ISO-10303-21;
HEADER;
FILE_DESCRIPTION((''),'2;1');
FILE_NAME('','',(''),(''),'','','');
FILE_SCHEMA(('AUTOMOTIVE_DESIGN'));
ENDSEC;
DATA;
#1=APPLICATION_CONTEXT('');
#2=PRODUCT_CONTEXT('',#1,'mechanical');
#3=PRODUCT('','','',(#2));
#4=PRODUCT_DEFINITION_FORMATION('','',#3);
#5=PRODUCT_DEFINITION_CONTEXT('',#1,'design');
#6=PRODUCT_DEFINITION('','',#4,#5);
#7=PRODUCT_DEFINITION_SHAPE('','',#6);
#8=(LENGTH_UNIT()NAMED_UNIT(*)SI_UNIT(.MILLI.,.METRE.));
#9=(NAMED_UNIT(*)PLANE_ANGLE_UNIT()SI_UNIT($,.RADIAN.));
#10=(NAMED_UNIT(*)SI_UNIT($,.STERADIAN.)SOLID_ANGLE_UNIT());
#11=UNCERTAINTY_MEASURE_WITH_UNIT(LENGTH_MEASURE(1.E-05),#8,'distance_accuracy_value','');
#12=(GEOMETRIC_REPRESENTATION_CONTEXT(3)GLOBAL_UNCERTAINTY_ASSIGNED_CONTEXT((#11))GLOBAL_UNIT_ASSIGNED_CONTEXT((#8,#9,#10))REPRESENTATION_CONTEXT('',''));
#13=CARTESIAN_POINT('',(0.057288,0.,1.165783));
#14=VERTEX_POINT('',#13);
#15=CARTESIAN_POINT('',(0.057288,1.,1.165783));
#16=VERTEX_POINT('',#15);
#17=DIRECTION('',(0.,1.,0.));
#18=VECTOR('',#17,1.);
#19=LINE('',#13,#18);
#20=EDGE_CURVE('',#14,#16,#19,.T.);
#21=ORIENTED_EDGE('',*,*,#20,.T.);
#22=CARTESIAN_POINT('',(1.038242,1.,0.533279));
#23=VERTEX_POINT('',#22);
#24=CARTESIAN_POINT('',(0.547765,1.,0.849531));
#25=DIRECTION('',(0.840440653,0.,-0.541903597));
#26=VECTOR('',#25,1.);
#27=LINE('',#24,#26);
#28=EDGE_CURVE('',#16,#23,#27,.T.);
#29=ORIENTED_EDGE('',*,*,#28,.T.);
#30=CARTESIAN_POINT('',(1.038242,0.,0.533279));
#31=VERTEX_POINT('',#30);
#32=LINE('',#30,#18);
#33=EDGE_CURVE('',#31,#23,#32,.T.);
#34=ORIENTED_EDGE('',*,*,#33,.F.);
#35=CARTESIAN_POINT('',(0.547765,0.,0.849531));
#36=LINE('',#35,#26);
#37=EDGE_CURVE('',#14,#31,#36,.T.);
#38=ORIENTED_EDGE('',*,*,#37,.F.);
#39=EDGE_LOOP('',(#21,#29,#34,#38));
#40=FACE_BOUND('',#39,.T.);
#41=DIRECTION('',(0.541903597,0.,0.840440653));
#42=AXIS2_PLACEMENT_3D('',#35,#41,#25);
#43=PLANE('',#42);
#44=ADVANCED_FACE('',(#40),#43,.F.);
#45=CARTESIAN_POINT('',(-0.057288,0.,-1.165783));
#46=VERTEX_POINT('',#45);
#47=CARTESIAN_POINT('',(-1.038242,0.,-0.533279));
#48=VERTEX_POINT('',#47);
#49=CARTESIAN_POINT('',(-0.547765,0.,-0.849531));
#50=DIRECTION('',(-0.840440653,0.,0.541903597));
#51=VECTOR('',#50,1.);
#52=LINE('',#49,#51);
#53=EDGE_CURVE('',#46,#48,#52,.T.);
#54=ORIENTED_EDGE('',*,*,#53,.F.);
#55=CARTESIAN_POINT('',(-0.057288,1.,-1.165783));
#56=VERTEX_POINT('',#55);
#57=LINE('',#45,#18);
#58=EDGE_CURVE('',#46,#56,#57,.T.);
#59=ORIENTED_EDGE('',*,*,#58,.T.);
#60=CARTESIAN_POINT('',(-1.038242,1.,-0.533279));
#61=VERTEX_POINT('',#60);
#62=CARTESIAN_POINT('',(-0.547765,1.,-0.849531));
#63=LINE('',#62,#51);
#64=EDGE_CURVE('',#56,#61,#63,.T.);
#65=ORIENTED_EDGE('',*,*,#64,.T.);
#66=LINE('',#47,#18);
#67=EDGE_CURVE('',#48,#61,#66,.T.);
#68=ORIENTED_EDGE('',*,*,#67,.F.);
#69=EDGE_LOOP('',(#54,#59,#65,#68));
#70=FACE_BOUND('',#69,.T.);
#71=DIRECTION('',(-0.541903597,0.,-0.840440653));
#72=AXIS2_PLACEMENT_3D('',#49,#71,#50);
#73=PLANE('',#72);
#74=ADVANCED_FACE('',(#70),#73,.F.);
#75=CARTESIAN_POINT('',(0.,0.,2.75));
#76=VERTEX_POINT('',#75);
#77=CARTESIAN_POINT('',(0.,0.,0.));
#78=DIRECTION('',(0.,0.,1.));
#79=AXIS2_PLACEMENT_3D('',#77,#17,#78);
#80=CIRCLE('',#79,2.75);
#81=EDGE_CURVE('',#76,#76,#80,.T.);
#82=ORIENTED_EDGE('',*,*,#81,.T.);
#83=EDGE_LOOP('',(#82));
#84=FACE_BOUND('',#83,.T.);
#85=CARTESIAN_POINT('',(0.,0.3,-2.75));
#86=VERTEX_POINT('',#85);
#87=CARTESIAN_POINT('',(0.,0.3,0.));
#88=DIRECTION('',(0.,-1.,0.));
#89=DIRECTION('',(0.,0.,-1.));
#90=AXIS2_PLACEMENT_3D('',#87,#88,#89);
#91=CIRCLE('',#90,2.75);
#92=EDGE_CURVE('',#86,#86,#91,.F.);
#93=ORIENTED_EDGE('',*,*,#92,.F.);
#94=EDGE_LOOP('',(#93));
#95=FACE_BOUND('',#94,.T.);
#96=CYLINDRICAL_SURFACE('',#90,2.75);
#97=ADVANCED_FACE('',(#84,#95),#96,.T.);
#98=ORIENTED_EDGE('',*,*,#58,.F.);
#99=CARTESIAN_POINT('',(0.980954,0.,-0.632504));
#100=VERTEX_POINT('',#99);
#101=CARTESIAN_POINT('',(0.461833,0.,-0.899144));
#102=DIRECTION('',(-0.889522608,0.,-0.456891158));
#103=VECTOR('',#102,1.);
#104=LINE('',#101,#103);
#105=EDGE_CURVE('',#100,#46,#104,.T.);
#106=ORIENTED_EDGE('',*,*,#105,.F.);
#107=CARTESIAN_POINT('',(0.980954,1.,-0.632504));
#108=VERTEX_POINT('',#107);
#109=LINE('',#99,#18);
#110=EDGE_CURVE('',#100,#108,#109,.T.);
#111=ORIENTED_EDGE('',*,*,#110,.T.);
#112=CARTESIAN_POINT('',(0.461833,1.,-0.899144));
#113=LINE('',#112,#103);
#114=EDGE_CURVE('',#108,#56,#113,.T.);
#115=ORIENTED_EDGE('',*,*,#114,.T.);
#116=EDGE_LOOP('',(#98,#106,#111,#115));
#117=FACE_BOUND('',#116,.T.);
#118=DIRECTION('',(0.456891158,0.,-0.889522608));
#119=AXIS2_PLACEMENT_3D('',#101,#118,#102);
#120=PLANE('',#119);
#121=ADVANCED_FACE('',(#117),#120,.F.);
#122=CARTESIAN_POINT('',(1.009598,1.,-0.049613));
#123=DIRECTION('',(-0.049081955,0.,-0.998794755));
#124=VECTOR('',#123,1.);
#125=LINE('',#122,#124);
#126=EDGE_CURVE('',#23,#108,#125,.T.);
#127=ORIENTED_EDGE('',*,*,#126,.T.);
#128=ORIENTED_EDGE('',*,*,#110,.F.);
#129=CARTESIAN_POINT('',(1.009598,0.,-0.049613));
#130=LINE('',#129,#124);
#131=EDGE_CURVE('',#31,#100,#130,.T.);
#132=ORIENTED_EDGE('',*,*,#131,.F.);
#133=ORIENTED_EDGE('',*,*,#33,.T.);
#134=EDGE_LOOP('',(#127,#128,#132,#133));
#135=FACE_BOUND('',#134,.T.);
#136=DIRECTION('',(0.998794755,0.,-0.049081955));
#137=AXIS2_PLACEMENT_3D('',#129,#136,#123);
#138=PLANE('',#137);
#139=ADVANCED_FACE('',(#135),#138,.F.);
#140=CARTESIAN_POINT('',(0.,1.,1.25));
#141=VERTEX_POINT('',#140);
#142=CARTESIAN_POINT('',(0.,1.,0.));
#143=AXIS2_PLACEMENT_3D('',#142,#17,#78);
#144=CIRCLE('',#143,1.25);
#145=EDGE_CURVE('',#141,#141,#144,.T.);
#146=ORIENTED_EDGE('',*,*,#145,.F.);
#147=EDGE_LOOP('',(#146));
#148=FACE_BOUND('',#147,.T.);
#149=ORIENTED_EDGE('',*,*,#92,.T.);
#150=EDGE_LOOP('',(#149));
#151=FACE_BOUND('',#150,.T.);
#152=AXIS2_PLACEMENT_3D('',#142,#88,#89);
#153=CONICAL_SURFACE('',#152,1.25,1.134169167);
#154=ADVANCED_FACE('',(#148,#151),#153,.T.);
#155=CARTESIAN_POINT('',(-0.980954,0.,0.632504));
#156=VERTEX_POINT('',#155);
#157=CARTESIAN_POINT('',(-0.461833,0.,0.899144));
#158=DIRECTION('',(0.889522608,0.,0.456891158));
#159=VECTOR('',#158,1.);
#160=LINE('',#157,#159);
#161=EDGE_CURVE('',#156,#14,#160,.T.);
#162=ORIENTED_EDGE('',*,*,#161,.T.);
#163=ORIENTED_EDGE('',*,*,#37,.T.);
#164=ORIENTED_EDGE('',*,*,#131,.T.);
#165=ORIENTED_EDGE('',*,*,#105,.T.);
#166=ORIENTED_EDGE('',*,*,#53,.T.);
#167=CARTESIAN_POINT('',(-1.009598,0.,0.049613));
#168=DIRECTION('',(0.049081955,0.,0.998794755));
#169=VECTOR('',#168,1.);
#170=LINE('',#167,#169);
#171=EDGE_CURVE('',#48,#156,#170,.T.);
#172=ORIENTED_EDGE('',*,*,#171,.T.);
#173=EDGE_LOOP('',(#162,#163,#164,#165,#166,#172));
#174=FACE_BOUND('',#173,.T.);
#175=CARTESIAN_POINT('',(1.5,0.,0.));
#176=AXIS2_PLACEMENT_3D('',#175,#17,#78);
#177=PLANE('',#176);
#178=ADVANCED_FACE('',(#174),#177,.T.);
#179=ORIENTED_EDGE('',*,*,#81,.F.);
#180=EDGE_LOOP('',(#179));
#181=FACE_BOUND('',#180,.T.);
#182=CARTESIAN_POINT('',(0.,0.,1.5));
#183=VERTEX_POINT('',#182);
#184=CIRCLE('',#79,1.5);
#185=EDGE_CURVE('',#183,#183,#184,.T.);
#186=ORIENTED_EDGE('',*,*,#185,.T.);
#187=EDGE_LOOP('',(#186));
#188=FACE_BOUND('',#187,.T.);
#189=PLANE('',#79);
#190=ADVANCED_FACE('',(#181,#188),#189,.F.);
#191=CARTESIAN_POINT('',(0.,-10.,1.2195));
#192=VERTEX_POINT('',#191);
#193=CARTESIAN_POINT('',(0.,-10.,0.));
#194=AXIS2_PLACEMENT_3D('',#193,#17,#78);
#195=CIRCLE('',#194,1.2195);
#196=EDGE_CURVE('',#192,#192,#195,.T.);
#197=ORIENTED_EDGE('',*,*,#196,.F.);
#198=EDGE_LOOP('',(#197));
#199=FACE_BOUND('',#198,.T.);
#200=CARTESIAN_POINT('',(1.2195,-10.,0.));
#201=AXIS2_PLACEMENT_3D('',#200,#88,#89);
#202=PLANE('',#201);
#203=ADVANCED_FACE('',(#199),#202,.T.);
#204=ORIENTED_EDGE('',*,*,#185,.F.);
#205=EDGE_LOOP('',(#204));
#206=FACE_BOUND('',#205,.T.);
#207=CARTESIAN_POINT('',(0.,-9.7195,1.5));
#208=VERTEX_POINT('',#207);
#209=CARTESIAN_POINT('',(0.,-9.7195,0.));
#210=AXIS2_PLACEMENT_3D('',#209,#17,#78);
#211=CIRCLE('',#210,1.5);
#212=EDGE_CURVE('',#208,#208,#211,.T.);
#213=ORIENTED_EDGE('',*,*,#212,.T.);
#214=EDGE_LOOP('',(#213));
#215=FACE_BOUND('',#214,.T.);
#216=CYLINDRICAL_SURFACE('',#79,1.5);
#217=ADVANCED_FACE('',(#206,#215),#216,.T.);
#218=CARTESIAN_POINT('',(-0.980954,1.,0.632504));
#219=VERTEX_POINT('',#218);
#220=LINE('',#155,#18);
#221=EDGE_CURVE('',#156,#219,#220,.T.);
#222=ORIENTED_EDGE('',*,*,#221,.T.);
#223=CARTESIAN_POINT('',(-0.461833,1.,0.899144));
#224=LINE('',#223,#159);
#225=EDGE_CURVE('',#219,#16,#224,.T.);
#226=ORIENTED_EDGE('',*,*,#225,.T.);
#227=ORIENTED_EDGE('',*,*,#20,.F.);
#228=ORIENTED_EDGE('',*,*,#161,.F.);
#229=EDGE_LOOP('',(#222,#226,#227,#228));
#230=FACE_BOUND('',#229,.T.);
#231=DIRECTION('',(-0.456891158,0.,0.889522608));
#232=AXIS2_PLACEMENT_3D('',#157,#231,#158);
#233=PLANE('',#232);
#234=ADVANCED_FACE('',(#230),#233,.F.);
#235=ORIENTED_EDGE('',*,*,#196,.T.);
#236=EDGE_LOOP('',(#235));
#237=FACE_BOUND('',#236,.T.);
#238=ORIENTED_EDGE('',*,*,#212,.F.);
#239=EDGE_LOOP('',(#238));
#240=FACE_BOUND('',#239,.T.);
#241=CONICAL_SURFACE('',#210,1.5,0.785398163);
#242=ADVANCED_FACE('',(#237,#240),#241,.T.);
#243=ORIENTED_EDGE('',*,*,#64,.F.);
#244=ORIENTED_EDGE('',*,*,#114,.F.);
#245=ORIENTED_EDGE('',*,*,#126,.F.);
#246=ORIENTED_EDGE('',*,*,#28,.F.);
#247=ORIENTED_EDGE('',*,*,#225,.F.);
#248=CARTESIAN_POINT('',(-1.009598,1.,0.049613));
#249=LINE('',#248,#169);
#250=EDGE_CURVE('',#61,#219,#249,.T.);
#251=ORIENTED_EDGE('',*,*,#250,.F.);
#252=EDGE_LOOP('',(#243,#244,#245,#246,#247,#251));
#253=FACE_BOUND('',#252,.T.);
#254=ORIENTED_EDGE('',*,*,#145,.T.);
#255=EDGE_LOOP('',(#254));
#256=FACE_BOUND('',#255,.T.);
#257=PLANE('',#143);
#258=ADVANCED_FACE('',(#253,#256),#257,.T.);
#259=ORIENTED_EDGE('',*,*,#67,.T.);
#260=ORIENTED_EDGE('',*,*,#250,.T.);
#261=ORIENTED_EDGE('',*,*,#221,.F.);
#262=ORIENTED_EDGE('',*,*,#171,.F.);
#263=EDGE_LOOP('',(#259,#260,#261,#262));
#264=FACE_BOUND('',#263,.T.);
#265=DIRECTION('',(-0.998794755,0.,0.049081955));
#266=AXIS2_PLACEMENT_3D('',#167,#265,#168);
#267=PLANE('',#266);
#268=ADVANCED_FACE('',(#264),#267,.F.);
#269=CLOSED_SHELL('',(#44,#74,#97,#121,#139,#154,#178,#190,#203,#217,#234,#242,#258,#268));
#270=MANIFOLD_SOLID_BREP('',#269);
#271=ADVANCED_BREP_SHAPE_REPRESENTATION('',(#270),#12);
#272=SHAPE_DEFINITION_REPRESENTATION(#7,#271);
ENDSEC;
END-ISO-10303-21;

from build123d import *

# Parameters (mm, degrees)
SKETCH1_R           = 2.75
BOSS_EXTRUDE1_DEPTH = 0.3
SKETCH2_R           = 1.25
CUT_EXTRUDE1_DEPTH  = 1


# Read off the part's stored shape, not the designer's step: M3x0.5 Machine Threads Stud1
with BuildPart() as part:
    # Sketch1 → Boss-Extrude1 (new body)
    with BuildSketch(Plane(origin=(0, 0, 0), x_dir=(1, 0, 0), z_dir=(0, 1, 0))):
        with Locations(Location((0, 0, 0), (0, 0, 270))):
            Circle(SKETCH1_R)
    extrude(amount=BOSS_EXTRUDE1_DEPTH)

    # Sketch2 → section 0 of loft1
    with BuildSketch(Plane(origin=(0, 1, 0), x_dir=(1, 0, 0), z_dir=(0, 1, 0)), mode=Mode.PRIVATE) as loft1_s0:
        Circle(SKETCH2_R)
    # loft up to a face of the part (loft1)
    loft([loft1_s0.sketch, Face(Wire([part.edges().sort_by_distance((2.004663725, 0.3, -1.882504541))[0]]))])

    # Sketch2<4> → Cut-Extrude1 (cut)
    with BuildSketch(Plane(origin=(0, 1, 0), x_dir=(1, 0, 0), z_dir=(0, 1, 0))):
        Polygon((-0.98095369, -0.632504307), (0.057287953, -1.165782969), (1.038241642, -0.533278662), (0.98095369, 0.632504307), (-0.057287953, 1.165782969), (-1.038241642, 0.533278662), align=None)
    extrude(amount=-CUT_EXTRUDE1_DEPTH, mode=Mode.SUBTRACT)

    # M3x0.5 Machine Threads Stud1 outline → M3x0.5 Machine Threads Stud1 (revolve)
    with BuildSketch(Plane.XY):
        Polygon((0, 0), (0, -10), (1.2195, -10), (1.5, -9.7195), (1.5, 0), align=None)
    revolve(axis=Axis((0, 0, 0), (0, 1, 0)))


solid = part.part
